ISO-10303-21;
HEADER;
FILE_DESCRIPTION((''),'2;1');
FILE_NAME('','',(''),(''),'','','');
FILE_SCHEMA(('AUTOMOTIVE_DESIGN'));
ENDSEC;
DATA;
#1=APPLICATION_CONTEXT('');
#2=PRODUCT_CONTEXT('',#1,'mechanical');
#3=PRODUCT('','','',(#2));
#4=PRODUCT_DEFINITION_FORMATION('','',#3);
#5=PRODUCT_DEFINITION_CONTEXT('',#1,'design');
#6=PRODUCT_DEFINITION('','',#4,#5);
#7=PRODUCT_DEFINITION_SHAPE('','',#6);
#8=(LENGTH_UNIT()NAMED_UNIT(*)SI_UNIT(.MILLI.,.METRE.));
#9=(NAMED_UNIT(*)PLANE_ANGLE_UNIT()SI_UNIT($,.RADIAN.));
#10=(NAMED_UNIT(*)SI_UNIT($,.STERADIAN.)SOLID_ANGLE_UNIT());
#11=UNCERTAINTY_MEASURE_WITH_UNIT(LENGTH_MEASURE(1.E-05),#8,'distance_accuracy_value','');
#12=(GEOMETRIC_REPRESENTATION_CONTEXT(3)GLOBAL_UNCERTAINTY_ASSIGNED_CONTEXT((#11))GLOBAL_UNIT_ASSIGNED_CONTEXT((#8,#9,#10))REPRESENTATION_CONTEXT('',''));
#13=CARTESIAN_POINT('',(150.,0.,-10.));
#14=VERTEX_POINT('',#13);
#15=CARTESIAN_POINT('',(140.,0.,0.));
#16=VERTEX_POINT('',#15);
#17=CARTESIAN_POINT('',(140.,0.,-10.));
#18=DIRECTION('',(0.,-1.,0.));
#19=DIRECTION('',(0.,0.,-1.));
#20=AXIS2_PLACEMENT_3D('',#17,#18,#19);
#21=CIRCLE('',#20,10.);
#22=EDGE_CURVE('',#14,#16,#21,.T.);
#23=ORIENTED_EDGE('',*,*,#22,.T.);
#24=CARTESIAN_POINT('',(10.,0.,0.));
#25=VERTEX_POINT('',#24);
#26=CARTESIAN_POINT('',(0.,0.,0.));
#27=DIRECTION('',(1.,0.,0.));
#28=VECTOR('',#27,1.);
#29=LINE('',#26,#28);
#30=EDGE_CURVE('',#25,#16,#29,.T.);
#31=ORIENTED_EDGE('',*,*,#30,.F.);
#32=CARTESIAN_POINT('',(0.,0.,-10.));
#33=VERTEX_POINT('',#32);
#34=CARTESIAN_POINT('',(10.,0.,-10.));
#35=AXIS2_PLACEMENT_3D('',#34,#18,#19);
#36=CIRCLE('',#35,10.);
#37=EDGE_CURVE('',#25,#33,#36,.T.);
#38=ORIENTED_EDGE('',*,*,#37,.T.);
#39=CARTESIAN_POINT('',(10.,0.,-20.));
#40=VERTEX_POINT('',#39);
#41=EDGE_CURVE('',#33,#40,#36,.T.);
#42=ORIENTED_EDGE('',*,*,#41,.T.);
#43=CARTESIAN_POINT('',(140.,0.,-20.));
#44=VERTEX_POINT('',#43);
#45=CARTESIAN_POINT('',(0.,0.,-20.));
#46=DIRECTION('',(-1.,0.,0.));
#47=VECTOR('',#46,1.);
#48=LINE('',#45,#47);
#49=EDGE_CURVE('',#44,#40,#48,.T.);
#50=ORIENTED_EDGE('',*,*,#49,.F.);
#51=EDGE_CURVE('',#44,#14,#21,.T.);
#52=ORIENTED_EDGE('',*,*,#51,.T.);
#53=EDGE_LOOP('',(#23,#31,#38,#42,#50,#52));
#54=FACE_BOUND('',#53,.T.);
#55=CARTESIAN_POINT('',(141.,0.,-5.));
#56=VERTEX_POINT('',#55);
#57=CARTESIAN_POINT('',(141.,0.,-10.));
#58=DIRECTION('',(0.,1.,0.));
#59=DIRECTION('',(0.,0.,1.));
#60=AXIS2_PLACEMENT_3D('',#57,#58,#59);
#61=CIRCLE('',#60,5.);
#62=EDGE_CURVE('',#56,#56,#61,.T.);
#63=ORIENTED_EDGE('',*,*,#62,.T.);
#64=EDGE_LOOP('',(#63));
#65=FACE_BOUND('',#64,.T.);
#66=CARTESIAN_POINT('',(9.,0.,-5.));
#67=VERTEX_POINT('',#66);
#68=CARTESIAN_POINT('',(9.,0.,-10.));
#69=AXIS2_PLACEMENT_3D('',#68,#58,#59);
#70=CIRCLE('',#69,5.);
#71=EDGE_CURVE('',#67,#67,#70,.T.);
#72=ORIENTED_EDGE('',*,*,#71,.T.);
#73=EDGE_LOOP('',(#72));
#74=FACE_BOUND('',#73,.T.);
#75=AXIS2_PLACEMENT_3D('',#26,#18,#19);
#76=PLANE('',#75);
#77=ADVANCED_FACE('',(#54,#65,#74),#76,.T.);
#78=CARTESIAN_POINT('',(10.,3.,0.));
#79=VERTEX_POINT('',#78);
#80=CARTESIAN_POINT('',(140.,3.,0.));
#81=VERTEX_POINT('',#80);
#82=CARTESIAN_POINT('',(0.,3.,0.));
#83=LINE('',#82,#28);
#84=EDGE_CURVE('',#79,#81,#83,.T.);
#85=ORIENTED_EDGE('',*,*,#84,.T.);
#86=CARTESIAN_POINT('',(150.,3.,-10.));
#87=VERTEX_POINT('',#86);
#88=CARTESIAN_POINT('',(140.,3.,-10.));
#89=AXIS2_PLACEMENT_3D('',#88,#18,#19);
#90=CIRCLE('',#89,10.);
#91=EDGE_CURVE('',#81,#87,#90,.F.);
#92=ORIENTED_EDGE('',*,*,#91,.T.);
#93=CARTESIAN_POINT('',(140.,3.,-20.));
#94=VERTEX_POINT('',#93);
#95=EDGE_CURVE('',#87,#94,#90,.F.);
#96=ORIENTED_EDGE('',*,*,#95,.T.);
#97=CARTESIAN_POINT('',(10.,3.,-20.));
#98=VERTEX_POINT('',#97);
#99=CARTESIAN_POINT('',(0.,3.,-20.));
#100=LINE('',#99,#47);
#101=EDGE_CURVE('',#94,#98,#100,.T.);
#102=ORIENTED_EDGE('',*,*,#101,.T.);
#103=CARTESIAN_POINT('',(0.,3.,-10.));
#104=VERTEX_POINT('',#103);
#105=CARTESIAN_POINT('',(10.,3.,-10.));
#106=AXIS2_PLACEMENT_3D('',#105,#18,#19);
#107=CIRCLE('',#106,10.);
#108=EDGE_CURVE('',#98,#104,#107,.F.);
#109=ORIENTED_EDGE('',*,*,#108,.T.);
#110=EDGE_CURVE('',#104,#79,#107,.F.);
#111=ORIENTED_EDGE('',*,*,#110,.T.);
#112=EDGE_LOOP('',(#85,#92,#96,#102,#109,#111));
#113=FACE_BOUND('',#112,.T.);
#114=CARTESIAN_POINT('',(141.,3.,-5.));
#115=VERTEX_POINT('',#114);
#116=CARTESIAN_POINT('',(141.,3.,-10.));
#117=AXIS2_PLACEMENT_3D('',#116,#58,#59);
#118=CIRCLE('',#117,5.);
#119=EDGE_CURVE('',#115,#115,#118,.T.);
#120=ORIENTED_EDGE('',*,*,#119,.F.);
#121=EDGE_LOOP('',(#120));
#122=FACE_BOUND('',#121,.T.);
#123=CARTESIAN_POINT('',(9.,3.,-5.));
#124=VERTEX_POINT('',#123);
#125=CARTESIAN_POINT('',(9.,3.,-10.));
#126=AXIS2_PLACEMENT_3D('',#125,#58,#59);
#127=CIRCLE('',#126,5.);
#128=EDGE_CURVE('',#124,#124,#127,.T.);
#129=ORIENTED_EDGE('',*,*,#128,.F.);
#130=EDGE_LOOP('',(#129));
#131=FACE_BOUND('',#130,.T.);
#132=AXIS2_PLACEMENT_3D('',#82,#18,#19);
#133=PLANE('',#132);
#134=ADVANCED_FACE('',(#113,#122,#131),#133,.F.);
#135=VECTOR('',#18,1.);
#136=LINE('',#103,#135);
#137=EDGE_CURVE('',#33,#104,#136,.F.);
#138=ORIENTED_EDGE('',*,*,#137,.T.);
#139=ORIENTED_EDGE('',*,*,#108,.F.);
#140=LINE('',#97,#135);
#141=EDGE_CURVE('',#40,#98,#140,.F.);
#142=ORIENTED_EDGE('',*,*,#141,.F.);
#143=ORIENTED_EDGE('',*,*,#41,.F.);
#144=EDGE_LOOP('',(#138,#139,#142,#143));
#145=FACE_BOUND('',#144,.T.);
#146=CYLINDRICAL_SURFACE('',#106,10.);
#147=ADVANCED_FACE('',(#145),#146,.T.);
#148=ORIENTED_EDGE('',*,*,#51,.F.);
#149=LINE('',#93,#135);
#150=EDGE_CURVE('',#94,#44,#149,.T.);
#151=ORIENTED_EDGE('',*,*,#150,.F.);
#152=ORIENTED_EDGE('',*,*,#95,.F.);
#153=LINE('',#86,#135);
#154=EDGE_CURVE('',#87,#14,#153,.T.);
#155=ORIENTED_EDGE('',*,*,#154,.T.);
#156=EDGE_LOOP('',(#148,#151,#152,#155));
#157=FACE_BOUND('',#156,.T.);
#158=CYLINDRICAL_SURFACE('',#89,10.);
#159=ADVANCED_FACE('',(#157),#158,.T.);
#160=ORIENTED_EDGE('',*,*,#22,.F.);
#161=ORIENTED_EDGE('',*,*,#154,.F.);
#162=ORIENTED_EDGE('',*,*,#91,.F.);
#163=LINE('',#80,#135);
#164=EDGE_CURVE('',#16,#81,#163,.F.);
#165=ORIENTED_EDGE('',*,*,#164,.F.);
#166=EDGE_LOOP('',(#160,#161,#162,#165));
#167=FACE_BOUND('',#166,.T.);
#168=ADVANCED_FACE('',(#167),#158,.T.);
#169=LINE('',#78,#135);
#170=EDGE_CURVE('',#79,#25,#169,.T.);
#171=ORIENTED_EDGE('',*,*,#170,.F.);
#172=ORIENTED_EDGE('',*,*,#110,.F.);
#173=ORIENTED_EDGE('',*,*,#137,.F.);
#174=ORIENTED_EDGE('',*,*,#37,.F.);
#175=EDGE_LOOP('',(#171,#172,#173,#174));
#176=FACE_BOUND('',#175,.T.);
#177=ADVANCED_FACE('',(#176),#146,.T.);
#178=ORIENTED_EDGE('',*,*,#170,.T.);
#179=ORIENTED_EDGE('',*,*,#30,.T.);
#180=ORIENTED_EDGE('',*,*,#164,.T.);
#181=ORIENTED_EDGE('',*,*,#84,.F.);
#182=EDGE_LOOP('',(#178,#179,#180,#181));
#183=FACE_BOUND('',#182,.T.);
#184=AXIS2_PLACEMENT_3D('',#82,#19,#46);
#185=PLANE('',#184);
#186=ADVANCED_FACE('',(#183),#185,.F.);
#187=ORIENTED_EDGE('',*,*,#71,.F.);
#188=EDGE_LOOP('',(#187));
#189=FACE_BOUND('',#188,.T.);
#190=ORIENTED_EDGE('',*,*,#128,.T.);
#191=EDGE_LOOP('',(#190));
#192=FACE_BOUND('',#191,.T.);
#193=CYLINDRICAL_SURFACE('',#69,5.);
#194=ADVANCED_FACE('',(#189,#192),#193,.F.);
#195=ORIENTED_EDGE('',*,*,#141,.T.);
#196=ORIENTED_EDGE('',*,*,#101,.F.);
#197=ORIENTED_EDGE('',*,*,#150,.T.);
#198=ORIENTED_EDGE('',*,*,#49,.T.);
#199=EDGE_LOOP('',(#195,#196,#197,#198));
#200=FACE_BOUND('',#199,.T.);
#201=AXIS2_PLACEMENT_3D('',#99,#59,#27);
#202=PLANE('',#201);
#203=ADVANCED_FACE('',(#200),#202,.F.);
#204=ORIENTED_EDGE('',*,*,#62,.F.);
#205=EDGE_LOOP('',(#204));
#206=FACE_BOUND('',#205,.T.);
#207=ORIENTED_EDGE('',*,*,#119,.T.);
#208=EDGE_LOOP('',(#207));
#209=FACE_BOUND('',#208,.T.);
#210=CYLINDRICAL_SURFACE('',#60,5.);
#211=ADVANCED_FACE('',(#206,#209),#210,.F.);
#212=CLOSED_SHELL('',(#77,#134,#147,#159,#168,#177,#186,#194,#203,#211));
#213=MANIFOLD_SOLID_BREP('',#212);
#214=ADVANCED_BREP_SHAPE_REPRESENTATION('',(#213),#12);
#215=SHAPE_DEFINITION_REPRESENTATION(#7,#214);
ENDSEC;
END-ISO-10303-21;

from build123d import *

# Parameters (mm, degrees)
SKETCH2_W           = 150
SKETCH2_H           = 20
BOSS_EXTRUDE1_DEPTH = 3
SKETCH3_R           = 5
CUT_EXTRUDE1_DEPTH  = 152.35719342
SKETCH4_R           = 5
CUT_EXTRUDE2_DEPTH  = 152.35719342
FILLET1_R           = 10
FILLET2_R           = 10


with BuildPart() as part:
    # Sketch2 → Boss-Extrude1 (new body)
    with BuildSketch(Plane(origin=(0, 0, 0), x_dir=(1, 0, 0), z_dir=(0, 1, 0))):
        with Locations((75, 10)):
            Rectangle(SKETCH2_W, SKETCH2_H)
    extrude(amount=BOSS_EXTRUDE1_DEPTH)

    # Sketch3 → Cut-Extrude1 (cut, through all)
    with BuildSketch(Plane(origin=(0, 3, 0), x_dir=(1, 0, 0), z_dir=(0, 1, 0))):
        with Locations(Location((9, 10, 0), (0, 0, 270))):
            Circle(SKETCH3_R)
    extrude(amount=-CUT_EXTRUDE1_DEPTH, mode=Mode.SUBTRACT)

    # Sketch4 → Cut-Extrude2 (cut, through all)
    with BuildSketch(Plane(origin=(0, 3, 0), x_dir=(1, 0, 0), z_dir=(0, 1, 0))):
        with Locations(Location((141, 10, 0), (0, 0, 270))):
            Circle(SKETCH4_R)
    extrude(amount=-CUT_EXTRUDE2_DEPTH, mode=Mode.SUBTRACT)

    # Fillet1
    fillet1_edges = [part.edges().sort_by_distance(p)[0] for p in [
        (0, 1.5, -20),
        (0, 1.5, 0),
    ]]
    fillet(fillet1_edges, radius=FILLET1_R - 0.0001)  # a hair under: the kernel refuses the full size

    # Fillet2
    fillet2_edges = [part.edges().sort_by_distance(p)[0] for p in [
        (150, 1.5, -20),
        (150, 1.5, 0),
    ]]
    fillet(fillet2_edges, radius=FILLET2_R - 0.0001)  # a hair under: the kernel refuses the full size


solid = part.part
